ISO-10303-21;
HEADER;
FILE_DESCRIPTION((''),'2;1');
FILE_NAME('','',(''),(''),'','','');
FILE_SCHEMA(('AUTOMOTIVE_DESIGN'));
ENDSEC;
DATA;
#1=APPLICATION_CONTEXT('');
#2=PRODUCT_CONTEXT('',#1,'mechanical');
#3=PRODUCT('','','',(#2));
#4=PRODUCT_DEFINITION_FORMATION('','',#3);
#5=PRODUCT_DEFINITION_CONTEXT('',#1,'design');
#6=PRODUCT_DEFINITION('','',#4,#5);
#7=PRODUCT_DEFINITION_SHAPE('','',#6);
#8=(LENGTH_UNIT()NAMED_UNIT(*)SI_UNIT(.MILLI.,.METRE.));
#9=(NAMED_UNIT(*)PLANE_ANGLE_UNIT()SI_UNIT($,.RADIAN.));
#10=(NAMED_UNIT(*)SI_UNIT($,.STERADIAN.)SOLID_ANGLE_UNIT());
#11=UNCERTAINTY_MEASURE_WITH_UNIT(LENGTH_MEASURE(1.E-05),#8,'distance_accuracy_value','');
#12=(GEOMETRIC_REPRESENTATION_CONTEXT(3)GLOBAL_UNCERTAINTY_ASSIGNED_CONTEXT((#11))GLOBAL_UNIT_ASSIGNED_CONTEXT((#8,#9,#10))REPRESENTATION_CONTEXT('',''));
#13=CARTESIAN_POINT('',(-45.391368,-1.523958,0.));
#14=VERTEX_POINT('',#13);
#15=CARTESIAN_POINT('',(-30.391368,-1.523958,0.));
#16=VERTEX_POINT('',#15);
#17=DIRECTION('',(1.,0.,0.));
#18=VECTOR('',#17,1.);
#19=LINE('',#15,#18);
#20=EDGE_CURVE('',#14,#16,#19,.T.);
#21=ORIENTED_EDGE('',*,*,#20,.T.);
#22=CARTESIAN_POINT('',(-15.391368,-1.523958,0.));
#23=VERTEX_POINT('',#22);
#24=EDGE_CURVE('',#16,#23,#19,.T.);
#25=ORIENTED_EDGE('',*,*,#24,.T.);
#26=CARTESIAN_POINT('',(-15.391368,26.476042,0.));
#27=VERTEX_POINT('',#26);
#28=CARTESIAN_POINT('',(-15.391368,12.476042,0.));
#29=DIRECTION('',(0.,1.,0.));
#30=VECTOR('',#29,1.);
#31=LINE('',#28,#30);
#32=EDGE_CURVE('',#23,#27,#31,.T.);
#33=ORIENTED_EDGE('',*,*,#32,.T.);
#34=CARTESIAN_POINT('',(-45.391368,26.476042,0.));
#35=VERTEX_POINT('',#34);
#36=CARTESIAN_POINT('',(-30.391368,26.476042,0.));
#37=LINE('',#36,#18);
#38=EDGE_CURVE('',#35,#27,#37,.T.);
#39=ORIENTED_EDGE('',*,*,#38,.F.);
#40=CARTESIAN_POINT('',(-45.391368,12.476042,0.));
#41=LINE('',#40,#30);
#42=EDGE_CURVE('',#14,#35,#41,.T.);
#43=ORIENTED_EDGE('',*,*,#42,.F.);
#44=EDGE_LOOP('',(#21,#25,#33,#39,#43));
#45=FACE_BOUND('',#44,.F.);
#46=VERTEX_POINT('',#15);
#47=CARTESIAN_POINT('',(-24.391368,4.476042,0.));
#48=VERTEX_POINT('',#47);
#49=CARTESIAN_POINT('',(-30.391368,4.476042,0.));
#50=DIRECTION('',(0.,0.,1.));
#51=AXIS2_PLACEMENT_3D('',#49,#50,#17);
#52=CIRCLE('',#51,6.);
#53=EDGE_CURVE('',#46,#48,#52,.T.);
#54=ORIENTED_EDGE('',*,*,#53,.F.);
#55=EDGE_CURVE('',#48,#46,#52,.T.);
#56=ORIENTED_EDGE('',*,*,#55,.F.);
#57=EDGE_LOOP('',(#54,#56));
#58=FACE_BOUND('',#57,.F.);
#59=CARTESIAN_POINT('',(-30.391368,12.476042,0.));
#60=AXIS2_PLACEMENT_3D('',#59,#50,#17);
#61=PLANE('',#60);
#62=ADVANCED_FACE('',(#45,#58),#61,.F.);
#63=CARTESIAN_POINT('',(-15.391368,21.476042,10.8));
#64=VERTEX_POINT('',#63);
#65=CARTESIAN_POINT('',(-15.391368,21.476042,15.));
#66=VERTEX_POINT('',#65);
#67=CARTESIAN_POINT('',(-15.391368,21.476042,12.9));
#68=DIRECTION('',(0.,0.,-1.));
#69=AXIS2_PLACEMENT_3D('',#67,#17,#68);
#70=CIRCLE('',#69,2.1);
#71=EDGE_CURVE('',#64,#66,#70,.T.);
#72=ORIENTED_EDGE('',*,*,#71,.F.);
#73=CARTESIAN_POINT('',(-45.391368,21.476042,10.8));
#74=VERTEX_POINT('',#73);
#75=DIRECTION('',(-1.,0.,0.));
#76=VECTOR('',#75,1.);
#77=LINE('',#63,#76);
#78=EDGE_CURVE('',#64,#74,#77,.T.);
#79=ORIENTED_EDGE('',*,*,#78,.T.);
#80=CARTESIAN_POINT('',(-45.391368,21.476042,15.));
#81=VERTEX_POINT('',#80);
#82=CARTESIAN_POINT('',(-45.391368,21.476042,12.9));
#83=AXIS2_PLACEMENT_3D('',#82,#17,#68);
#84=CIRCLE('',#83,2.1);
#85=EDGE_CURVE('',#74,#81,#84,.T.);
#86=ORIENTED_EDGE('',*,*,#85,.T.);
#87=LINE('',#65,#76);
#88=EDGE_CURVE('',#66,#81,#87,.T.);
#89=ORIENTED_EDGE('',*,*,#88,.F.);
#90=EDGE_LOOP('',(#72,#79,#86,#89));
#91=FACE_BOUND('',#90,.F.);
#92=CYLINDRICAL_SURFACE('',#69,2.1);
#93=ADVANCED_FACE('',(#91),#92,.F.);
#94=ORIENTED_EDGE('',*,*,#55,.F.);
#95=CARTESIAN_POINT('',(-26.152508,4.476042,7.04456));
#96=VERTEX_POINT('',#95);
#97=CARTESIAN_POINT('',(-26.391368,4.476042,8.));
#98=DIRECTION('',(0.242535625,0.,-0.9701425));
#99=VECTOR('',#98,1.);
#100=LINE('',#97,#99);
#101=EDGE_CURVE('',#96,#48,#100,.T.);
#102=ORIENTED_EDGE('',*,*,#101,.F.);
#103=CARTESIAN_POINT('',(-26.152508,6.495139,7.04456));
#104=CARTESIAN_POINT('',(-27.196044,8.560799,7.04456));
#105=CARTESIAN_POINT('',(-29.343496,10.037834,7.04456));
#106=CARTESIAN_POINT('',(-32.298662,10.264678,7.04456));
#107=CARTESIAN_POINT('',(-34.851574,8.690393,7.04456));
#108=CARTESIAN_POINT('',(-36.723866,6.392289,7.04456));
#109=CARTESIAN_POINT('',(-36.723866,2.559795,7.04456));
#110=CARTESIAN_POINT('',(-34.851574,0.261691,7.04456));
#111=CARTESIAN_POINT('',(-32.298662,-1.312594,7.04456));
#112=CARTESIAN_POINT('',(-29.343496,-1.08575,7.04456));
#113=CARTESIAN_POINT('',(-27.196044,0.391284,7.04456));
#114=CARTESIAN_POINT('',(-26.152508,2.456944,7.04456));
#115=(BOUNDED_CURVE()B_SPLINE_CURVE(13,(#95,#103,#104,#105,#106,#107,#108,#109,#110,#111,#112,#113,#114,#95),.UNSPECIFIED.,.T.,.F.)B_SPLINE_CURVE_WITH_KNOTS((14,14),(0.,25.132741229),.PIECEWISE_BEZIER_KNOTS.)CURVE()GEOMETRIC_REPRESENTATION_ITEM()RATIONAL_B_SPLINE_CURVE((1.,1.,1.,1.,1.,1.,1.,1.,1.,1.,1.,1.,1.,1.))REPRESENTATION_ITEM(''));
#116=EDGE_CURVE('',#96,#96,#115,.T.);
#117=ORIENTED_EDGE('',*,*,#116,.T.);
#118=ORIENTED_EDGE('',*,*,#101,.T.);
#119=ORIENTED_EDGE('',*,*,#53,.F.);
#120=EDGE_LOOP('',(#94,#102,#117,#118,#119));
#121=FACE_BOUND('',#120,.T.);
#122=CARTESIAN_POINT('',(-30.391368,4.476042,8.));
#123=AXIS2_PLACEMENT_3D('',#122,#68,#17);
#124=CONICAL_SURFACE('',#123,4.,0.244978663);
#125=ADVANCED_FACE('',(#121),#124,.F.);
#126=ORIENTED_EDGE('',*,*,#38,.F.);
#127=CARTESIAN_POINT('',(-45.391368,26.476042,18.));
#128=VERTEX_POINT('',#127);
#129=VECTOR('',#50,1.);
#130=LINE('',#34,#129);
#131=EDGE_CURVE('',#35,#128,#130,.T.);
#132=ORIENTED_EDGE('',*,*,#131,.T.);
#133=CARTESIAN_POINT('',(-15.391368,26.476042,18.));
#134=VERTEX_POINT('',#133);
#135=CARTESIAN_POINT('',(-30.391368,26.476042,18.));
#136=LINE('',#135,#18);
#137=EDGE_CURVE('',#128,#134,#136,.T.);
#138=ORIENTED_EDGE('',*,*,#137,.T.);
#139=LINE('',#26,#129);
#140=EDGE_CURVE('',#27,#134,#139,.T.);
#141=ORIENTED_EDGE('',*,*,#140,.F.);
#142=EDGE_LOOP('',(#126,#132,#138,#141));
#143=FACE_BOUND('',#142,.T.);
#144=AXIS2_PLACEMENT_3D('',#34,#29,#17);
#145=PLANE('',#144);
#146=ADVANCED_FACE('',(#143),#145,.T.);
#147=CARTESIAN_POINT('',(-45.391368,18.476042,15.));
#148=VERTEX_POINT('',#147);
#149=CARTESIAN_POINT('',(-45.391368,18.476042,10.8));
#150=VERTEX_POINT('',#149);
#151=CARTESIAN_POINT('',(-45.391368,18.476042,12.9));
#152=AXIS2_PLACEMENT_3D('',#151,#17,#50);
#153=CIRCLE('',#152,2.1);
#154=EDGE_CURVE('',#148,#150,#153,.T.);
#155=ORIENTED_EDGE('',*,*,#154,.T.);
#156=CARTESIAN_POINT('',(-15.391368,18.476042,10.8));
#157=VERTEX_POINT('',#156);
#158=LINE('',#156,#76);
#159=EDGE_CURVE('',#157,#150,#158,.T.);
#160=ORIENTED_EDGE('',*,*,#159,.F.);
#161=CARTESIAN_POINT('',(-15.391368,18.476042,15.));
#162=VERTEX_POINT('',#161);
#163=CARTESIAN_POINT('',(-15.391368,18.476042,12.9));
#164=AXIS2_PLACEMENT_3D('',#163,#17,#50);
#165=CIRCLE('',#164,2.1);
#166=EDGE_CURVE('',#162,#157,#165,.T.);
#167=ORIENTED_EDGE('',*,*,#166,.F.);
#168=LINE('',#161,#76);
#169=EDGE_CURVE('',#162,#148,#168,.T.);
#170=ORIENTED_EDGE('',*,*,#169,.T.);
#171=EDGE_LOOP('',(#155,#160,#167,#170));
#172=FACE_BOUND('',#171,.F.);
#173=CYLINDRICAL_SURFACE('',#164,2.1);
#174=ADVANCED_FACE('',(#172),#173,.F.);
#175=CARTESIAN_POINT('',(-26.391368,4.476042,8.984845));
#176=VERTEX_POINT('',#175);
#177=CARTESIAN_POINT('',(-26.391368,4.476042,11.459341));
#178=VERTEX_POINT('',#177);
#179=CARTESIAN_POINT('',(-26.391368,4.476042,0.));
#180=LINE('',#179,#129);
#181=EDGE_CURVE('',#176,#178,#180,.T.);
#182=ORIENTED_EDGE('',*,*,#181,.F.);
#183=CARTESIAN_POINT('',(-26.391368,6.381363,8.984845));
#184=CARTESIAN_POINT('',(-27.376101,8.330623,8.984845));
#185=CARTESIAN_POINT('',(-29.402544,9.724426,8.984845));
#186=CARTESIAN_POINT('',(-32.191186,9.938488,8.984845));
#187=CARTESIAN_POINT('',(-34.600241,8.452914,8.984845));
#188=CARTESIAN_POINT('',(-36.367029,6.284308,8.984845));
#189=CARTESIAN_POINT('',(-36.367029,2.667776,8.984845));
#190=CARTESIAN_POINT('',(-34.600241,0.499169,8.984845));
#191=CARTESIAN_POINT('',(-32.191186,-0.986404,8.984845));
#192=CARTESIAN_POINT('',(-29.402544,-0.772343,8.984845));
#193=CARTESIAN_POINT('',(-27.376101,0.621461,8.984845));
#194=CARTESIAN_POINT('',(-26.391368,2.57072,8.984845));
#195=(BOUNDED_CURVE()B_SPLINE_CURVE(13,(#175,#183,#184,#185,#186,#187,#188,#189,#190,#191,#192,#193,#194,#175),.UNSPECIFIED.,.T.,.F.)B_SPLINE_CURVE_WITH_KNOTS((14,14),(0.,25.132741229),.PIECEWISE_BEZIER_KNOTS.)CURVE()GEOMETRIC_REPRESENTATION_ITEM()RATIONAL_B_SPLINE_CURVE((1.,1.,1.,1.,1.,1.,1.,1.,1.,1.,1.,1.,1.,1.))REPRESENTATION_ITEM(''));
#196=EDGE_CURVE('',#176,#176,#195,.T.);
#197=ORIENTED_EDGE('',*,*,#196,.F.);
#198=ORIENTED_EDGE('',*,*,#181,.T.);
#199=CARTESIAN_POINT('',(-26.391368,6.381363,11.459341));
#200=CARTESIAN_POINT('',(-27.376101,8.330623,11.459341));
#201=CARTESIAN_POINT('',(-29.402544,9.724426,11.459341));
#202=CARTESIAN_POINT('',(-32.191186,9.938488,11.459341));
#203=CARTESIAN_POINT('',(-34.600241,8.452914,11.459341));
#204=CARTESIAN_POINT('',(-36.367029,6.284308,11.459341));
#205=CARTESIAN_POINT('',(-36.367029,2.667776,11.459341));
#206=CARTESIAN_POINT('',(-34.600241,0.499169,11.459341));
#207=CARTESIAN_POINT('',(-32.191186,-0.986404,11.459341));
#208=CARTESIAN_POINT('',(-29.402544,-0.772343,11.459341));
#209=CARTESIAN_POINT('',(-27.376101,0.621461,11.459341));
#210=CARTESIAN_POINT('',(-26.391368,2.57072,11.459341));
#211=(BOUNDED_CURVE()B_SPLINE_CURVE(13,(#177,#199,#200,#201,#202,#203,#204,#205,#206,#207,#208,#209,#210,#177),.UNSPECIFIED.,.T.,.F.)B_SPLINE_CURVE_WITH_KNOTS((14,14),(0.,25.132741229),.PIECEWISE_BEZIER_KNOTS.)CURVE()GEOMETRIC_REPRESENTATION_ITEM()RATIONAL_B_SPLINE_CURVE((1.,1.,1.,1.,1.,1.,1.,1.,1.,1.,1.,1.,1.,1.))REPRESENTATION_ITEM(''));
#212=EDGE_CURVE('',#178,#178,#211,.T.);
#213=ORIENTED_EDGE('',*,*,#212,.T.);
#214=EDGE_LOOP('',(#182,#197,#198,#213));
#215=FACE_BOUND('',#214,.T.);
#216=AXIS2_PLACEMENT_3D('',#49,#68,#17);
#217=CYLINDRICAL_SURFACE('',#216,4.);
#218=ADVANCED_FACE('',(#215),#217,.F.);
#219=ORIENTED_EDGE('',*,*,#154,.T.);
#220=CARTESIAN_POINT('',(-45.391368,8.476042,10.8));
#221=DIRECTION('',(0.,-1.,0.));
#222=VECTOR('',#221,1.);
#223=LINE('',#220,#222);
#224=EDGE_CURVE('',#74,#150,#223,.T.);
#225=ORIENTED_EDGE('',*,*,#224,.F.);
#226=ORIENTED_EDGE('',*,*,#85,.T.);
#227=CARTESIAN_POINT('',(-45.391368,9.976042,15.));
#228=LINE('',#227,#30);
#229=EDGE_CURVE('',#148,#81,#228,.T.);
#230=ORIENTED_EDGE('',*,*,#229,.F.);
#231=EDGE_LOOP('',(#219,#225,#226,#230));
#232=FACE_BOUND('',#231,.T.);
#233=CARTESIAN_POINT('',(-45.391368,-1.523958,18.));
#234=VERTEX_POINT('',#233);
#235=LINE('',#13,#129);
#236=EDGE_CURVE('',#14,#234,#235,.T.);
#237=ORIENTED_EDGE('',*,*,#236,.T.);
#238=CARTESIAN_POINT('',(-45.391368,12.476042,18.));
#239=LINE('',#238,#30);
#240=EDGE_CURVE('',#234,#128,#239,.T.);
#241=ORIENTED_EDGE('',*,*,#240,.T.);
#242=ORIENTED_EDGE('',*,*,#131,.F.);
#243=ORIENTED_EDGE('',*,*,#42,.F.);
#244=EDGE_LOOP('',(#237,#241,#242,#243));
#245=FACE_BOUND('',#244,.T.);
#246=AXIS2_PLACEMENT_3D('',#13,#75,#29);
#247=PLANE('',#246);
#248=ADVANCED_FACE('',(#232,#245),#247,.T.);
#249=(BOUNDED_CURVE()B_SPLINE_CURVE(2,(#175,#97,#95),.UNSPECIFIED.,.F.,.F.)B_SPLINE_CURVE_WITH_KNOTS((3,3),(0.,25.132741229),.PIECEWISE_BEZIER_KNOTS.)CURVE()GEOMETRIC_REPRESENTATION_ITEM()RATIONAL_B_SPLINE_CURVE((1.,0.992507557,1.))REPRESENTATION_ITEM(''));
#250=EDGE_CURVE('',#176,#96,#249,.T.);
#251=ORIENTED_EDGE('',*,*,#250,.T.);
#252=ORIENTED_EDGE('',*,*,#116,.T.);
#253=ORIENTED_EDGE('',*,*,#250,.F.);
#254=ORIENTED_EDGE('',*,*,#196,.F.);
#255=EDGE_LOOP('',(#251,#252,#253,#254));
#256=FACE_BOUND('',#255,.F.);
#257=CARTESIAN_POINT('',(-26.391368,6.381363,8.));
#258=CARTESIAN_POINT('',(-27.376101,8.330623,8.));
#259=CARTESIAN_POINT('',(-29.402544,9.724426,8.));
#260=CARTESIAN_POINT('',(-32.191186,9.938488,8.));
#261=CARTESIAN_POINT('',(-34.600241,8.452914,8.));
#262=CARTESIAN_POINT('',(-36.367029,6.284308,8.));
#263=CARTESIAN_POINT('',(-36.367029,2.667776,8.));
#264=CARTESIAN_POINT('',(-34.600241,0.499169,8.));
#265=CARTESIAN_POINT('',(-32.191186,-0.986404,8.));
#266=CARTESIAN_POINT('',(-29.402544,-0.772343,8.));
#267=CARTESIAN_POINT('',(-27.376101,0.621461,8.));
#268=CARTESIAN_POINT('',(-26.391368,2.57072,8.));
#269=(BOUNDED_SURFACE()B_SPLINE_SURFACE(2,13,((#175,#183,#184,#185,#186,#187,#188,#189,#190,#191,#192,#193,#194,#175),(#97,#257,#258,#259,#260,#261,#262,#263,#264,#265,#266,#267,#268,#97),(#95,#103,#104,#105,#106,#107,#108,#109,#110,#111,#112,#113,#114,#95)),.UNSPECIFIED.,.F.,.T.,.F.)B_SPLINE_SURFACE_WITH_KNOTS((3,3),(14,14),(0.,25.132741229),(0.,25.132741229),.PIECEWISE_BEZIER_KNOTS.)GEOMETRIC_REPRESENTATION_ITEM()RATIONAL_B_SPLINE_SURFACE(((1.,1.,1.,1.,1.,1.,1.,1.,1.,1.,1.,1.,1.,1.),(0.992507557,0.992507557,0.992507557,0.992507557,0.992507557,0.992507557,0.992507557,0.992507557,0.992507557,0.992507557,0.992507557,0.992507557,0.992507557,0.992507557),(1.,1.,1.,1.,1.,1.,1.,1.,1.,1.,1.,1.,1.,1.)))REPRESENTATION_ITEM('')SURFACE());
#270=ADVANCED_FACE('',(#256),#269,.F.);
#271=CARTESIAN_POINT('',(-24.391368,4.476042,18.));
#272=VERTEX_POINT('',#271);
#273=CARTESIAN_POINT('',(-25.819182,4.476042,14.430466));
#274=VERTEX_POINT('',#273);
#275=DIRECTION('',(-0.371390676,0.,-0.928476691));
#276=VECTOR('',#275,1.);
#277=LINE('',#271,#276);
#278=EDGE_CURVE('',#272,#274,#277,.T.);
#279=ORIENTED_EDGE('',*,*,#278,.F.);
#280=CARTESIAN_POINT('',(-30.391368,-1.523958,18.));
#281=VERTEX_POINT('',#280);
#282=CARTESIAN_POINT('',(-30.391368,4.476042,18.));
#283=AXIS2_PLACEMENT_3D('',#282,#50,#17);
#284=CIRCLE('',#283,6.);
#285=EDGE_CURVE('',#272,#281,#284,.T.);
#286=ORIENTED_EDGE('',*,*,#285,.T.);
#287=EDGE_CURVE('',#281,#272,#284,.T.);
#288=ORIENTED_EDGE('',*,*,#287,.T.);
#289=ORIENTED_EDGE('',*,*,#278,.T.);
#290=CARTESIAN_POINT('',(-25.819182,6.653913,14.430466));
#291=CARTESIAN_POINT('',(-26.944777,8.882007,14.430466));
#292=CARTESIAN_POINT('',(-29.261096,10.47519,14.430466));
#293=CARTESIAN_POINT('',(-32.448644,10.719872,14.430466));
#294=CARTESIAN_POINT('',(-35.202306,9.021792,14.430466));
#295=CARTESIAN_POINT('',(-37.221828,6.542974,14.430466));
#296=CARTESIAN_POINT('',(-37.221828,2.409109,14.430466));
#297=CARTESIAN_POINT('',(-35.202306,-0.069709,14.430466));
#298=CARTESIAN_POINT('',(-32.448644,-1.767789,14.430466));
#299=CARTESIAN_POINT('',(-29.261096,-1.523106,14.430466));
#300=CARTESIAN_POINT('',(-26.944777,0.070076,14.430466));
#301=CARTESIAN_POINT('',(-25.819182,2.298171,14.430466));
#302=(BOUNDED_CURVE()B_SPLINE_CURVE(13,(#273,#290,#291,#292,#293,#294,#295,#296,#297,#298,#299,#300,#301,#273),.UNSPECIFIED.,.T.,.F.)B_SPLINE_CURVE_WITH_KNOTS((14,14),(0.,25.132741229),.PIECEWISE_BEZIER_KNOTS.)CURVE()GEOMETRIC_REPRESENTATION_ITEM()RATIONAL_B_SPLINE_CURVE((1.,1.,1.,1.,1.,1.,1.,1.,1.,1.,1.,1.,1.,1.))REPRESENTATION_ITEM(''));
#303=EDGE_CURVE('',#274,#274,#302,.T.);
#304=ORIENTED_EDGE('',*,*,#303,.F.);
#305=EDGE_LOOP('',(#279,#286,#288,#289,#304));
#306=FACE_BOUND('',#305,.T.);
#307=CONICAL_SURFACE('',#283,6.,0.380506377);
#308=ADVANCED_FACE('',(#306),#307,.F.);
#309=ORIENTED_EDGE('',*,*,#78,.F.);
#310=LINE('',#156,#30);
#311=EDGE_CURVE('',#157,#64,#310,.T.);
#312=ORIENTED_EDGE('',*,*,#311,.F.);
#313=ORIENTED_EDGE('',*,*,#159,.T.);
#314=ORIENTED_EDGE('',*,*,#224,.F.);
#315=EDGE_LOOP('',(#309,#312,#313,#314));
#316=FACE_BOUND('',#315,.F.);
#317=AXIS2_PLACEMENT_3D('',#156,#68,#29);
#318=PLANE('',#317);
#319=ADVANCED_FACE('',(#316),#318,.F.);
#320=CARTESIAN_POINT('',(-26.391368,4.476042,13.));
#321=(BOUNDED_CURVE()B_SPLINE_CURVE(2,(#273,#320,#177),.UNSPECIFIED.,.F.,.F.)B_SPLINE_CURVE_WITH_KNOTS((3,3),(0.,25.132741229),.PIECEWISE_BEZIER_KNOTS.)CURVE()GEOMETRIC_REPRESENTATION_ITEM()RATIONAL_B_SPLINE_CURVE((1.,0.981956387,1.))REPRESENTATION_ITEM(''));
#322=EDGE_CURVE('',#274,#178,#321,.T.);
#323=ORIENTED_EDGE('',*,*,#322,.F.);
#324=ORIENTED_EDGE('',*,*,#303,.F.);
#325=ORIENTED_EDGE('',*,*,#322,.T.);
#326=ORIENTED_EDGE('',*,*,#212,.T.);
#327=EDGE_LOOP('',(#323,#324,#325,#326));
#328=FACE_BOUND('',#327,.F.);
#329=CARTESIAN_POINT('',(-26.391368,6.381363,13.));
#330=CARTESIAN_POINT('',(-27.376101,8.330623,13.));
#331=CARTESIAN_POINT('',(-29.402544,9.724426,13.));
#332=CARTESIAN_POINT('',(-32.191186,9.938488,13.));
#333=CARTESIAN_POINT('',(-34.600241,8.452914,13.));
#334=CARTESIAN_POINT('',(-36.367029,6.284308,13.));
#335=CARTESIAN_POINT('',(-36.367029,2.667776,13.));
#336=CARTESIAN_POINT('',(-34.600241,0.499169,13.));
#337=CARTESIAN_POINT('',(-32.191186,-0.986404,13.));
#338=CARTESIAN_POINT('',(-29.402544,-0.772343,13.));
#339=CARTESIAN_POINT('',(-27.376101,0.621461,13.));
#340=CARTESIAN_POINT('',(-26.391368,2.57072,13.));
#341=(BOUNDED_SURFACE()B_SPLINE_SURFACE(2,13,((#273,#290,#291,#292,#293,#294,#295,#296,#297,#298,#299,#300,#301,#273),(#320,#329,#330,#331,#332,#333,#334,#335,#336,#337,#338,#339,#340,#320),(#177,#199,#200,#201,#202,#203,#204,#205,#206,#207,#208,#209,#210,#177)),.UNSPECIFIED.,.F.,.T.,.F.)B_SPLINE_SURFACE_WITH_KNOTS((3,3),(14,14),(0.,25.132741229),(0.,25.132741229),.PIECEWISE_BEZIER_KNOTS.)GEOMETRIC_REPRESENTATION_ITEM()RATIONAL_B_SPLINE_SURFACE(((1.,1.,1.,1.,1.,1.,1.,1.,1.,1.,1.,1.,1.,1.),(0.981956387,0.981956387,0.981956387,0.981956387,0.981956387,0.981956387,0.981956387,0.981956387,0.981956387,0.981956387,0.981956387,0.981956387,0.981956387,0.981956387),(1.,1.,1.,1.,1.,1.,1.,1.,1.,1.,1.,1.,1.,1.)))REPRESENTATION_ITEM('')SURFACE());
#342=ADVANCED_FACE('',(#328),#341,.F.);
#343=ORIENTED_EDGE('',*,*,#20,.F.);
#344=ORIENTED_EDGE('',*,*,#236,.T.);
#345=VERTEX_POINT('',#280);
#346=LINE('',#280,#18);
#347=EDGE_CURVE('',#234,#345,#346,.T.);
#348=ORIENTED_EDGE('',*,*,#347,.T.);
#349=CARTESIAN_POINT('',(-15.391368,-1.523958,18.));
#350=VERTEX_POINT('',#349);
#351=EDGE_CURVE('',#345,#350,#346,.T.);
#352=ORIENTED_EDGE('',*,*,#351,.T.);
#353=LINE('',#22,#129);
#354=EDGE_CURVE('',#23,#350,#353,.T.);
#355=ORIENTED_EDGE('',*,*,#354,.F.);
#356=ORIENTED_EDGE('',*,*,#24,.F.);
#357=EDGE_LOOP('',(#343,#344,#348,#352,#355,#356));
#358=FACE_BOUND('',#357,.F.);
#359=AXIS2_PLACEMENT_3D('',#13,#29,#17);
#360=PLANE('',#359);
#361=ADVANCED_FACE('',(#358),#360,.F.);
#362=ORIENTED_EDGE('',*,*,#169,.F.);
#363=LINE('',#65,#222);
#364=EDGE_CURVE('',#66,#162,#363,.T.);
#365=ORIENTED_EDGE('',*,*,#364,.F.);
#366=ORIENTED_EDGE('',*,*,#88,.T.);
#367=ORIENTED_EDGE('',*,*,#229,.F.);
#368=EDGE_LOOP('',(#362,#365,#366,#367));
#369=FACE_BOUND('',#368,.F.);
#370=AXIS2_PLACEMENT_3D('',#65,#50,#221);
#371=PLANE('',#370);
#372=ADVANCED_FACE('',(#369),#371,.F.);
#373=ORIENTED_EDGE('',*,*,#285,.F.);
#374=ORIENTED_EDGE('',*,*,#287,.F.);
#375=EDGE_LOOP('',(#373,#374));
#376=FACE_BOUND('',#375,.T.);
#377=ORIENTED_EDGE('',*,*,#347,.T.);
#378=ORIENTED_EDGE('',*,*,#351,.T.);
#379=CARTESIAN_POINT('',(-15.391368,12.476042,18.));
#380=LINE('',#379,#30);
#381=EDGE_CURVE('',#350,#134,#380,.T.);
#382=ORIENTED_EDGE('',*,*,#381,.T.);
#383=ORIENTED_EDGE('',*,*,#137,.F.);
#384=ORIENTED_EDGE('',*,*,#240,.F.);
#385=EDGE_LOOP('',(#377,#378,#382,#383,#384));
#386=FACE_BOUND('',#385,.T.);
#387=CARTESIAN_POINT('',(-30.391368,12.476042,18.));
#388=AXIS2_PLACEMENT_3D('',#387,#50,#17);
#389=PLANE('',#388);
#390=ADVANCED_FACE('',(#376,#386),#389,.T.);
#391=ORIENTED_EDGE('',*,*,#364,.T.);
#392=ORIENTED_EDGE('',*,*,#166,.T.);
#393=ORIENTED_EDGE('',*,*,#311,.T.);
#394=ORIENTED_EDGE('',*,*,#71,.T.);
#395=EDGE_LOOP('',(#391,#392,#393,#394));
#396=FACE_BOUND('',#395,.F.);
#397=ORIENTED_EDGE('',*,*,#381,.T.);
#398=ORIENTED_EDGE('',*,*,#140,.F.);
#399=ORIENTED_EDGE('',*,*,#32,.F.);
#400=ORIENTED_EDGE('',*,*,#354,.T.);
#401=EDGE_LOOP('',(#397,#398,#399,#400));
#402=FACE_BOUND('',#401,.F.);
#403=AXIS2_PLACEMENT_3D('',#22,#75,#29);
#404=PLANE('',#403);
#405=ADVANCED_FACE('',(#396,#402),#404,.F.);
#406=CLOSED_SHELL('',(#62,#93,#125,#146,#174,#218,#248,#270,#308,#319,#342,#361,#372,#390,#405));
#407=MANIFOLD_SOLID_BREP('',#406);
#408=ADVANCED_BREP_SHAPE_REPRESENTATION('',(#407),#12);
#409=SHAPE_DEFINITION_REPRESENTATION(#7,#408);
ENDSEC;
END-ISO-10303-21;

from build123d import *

# Parameters (mm, degrees)
F0_W     = 30
F0_H     = 28
F0_R     = 4
F1_DEPTH = 18
F4_DEPTH = 40
F6_R     = 8
F7_R     = 8


# Not quite as in the source:
# - a fillet or chamfer that OpenCascade refuses, or shapes differently, is made with other operations: its cross-section is extruded or revolved along the edge and cut away or added


with BuildPart() as f1:
    # F0 (on Top) → F1 (new body)
    with BuildSketch(Plane.XY):
        with Locations((-30.3913680837, 12.4760417278)):
            Rectangle(F0_W, F0_H)
        with Locations((-30.3913680837, 4.4760417278)):
            Circle(F0_R, mode=Mode.SUBTRACT)
    extrude(amount=F1_DEPTH)

    # F2: chamfer of 2 x 8 on 1 edges, made by hand

    # F2_s1 → F2_t2 (revolve, cut)
    with BuildSketch(Plane.XZ.offset(-4.4760417278)):
        Polygon((-26.3913680837, 8), (-24.3913680837, 0), (-26.3913680837, 0), align=None)
    revolve(axis=Axis((-30.3913680837, 4.4760417278, 0), (0, 0, 1)), mode=Mode.SUBTRACT)

    # F3 (on face) → F4 (cut)
    with BuildSketch(Plane.YZ.offset(-15.3913680837)):
        with BuildLine():
            Line((18.4760417278, 10.8), (21.4760417278, 10.8))
            ThreePointArc((21.4760417278, 10.8), (23.5760417278, 12.9), (21.4760417278, 15))
            Line((21.4760417278, 15), (18.4760417278, 15))
            ThreePointArc((18.4760417278, 15), (16.3760417278, 12.9), (18.4760417278, 10.8))
        make_face()
    extrude(amount=-F4_DEPTH, mode=Mode.SUBTRACT)

    # F5: chamfer of 5 x 2 on 1 edges, made by hand

    # F5_s1 → F5_t2 (revolve, cut)
    with BuildSketch(Plane.XZ.offset(-4.4760417278)):
        Polygon((-24.3913680837, 18), (-26.3913680837, 13), (-26.3913680837, 18), align=None)
    revolve(axis=Axis((-30.3913680837, 4.4760417278, 18), (0, 0, 1)), mode=Mode.SUBTRACT)

    # F6
    f6_edges = [f1.edges().sort_by_distance(p)[0] for p in [
        (-34.391368, 4.476042, 13),
    ]]
    fillet(f6_edges, radius=F6_R)

    # F7
    f7_edges = [f1.edges().sort_by_distance(p)[0] for p in [
        (-34.391368, 4.476042, 8),
    ]]
    fillet(f7_edges, radius=F7_R)


solid = f1.part
